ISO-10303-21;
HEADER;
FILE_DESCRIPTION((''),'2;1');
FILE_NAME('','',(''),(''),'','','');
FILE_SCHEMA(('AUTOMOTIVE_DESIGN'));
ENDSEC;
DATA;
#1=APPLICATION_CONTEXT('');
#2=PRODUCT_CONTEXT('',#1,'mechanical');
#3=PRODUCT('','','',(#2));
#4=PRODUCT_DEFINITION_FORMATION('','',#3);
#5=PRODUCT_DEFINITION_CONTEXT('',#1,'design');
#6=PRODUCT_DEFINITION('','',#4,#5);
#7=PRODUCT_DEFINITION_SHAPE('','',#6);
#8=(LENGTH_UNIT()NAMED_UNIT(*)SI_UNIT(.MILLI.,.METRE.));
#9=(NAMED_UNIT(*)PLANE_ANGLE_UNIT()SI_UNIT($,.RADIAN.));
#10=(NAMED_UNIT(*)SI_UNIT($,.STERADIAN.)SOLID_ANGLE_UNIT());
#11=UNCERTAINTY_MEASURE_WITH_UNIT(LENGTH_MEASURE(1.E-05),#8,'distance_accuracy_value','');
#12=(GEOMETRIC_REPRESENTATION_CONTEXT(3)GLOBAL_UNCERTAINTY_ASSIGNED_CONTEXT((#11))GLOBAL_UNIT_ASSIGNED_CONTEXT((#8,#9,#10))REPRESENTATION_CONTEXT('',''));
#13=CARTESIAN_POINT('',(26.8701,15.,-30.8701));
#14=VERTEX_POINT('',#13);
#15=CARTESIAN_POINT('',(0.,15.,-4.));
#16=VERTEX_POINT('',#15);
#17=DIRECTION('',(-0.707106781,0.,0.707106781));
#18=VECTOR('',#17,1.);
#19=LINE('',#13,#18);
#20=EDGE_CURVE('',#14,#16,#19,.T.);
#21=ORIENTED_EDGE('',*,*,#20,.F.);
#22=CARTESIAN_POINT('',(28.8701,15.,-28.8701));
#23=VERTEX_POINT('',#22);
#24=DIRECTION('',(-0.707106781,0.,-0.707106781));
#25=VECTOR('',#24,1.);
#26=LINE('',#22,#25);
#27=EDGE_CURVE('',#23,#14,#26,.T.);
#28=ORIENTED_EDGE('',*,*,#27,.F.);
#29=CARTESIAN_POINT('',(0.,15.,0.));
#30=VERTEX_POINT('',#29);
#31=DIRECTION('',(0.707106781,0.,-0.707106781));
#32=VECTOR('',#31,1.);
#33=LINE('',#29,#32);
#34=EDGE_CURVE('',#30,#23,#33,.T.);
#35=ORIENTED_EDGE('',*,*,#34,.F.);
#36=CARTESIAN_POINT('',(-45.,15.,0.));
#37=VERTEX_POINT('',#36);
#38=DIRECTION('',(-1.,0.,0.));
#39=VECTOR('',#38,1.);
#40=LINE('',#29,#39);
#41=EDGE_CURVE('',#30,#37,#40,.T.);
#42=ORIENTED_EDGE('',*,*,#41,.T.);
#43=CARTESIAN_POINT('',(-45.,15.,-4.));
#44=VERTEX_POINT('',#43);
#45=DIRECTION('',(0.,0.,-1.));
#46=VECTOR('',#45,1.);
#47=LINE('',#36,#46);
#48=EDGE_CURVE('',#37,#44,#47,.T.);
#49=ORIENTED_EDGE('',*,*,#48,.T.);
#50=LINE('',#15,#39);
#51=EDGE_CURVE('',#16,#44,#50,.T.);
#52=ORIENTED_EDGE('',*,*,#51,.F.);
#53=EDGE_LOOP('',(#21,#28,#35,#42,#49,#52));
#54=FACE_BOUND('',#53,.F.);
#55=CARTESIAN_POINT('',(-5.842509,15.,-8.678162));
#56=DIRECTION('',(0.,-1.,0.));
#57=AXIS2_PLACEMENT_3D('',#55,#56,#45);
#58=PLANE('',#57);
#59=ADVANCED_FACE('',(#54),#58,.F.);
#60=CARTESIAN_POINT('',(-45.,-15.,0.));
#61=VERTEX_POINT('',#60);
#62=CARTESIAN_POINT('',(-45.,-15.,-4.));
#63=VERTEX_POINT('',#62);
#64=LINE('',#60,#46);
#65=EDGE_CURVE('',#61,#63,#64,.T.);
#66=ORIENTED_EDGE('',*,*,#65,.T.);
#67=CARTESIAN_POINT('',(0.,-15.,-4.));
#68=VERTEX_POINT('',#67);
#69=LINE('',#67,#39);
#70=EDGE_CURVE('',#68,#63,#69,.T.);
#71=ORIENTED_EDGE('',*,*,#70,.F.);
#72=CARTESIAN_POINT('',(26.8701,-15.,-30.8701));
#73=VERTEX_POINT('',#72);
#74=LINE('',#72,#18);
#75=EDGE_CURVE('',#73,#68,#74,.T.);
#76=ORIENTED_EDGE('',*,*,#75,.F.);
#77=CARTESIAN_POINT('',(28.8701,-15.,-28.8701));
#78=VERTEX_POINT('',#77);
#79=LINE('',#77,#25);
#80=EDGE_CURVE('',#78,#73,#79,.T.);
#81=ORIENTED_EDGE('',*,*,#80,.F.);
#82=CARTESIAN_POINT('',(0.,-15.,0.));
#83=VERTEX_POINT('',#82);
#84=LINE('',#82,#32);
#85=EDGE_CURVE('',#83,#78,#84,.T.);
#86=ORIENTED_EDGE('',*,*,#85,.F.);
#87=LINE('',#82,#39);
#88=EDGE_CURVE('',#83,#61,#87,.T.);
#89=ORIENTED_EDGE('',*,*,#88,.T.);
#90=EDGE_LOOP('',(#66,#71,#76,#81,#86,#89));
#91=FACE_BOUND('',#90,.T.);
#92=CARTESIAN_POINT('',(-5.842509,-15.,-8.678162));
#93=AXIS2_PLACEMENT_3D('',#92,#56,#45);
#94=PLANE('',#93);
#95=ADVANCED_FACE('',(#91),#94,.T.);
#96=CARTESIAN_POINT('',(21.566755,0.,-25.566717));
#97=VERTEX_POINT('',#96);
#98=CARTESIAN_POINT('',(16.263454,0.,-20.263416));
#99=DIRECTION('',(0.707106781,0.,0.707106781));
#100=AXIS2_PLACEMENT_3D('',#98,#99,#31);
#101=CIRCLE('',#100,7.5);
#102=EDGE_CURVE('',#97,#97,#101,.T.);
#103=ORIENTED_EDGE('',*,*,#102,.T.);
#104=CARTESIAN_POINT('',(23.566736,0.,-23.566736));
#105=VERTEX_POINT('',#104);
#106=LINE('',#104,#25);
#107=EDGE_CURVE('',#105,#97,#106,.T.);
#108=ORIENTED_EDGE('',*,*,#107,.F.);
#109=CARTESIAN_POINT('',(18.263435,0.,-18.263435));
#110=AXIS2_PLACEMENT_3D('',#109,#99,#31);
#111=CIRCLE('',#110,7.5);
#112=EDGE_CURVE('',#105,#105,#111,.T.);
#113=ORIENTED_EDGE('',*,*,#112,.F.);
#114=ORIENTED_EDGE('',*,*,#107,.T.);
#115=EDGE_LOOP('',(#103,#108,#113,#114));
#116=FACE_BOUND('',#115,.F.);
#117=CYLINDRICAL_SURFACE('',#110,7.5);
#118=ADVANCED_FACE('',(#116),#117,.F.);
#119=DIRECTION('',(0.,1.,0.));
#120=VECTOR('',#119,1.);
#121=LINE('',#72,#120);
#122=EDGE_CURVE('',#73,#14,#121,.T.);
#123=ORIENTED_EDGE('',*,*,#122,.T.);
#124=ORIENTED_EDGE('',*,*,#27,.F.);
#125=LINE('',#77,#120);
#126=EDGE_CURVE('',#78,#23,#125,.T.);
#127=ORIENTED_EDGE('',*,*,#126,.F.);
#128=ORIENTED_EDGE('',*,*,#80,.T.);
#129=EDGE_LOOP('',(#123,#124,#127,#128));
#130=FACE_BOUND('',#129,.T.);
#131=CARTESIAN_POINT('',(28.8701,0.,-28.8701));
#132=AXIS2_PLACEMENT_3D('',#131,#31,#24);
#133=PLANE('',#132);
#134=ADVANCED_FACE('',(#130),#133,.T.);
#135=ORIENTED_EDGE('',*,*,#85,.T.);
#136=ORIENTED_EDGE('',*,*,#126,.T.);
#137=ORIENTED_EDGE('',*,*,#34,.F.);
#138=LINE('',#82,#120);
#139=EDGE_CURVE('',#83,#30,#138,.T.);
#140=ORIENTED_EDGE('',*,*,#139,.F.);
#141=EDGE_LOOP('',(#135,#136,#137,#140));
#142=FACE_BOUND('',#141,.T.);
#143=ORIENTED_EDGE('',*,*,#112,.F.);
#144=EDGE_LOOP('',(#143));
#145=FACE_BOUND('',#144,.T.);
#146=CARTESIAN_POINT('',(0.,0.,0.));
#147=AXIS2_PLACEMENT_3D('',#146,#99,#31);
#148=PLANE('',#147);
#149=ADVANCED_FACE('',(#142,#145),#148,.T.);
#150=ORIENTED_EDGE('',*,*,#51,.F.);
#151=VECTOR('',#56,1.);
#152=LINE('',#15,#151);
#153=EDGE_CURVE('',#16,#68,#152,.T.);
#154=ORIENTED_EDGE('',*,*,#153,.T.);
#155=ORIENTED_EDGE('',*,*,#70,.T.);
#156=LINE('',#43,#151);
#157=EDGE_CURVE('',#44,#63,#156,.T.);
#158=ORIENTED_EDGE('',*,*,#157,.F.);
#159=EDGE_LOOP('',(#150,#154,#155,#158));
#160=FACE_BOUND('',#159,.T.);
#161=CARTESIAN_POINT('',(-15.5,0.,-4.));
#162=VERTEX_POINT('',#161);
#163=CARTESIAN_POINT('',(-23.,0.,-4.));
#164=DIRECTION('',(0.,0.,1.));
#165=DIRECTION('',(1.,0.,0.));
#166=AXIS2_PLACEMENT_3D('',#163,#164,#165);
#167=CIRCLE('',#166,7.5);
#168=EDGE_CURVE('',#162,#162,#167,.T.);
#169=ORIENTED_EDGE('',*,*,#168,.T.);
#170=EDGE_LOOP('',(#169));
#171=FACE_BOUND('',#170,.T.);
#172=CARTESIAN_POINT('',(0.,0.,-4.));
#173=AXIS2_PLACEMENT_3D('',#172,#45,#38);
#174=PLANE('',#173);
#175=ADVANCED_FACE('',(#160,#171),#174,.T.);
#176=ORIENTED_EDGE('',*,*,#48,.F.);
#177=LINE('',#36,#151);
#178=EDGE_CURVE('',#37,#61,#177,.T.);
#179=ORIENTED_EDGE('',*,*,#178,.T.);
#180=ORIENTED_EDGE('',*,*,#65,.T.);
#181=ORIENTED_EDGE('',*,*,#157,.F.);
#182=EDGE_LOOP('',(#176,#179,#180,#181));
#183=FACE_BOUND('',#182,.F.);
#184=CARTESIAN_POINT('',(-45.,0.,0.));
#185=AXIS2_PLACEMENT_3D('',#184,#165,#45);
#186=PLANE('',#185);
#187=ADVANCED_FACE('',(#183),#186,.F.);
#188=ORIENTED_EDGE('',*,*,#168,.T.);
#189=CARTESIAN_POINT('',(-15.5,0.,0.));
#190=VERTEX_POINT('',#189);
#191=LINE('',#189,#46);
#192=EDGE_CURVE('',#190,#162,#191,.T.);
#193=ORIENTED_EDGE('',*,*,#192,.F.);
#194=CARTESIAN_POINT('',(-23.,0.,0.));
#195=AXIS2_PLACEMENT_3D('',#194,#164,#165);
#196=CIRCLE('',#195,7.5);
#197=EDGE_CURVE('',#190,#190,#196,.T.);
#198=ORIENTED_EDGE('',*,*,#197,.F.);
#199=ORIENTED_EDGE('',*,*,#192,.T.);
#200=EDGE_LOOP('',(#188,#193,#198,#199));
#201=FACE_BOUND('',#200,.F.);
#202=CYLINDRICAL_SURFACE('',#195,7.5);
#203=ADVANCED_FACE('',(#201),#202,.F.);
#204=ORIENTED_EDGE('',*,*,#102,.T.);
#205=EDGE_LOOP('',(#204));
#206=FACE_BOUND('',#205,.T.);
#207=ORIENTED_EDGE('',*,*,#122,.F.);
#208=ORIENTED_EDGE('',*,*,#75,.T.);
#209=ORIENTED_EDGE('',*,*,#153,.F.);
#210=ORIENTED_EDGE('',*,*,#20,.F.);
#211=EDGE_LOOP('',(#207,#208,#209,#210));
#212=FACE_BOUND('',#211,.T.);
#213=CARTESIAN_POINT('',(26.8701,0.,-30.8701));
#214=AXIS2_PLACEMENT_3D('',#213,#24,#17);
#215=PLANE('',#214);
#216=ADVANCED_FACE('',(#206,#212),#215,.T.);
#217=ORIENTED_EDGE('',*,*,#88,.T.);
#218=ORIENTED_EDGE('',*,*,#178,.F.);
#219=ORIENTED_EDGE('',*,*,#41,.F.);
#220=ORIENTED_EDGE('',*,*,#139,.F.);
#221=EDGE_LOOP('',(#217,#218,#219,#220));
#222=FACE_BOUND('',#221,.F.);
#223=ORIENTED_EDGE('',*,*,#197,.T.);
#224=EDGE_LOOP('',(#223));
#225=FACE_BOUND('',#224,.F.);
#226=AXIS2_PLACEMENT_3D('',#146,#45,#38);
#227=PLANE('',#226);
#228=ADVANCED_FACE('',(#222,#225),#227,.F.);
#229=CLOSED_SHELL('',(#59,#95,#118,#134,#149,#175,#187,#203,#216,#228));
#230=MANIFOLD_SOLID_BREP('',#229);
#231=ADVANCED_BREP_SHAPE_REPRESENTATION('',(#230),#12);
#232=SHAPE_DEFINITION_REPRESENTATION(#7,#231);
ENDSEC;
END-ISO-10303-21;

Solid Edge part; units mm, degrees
sketch "Sketch1" plane through (0, 0, 0) normal (0, -1, 0) x (1, 0, 0)
  line L0 (0, 0) -> (-45, 0)
  line L1 (-45, 0) -> (-45, -4)
  line L2 (0, -4) -> (-45, -4)
  line L3 (26.8701, -30.8701) -> (0, -4)
  line L4 (28.8701, -28.8701) -> (26.8701, -30.8701)
  line L5 (0, 0) -> (28.8701, -28.8701)
  dimension "D1" = 4
  dimension "D2" = 45
  dimension "D3" = 38
extrude "Protrusion1" add sketch "Sketch1" along normal mid plane 30
sketch "Sketch2" plane through (-15, 0, 0) normal (0, 0, 1) x (1, 0, 0)
  circle A0 centre (-8, 0) radius 7.5
  dimension "D1" = 15
  dimension "D2" = 23
extrude "Cutout1" cut sketch "Sketch2" against normal up to surface (4 mm away)
sketch "Sketch3" plane through (10.6066, 0, -10.6066) normal (0.7071068, 0, 0.7071068) x (0.7071068, 0, -0.7071068)
  circle A0 centre (10.8284, 0) radius 7.5
  dimension "D1" = 15
  dimension "D2" = 23
extrude "Cutout2" cut sketch "Sketch3" against normal up to surface (2.8284 mm away)
properties material "Stainless steel"
